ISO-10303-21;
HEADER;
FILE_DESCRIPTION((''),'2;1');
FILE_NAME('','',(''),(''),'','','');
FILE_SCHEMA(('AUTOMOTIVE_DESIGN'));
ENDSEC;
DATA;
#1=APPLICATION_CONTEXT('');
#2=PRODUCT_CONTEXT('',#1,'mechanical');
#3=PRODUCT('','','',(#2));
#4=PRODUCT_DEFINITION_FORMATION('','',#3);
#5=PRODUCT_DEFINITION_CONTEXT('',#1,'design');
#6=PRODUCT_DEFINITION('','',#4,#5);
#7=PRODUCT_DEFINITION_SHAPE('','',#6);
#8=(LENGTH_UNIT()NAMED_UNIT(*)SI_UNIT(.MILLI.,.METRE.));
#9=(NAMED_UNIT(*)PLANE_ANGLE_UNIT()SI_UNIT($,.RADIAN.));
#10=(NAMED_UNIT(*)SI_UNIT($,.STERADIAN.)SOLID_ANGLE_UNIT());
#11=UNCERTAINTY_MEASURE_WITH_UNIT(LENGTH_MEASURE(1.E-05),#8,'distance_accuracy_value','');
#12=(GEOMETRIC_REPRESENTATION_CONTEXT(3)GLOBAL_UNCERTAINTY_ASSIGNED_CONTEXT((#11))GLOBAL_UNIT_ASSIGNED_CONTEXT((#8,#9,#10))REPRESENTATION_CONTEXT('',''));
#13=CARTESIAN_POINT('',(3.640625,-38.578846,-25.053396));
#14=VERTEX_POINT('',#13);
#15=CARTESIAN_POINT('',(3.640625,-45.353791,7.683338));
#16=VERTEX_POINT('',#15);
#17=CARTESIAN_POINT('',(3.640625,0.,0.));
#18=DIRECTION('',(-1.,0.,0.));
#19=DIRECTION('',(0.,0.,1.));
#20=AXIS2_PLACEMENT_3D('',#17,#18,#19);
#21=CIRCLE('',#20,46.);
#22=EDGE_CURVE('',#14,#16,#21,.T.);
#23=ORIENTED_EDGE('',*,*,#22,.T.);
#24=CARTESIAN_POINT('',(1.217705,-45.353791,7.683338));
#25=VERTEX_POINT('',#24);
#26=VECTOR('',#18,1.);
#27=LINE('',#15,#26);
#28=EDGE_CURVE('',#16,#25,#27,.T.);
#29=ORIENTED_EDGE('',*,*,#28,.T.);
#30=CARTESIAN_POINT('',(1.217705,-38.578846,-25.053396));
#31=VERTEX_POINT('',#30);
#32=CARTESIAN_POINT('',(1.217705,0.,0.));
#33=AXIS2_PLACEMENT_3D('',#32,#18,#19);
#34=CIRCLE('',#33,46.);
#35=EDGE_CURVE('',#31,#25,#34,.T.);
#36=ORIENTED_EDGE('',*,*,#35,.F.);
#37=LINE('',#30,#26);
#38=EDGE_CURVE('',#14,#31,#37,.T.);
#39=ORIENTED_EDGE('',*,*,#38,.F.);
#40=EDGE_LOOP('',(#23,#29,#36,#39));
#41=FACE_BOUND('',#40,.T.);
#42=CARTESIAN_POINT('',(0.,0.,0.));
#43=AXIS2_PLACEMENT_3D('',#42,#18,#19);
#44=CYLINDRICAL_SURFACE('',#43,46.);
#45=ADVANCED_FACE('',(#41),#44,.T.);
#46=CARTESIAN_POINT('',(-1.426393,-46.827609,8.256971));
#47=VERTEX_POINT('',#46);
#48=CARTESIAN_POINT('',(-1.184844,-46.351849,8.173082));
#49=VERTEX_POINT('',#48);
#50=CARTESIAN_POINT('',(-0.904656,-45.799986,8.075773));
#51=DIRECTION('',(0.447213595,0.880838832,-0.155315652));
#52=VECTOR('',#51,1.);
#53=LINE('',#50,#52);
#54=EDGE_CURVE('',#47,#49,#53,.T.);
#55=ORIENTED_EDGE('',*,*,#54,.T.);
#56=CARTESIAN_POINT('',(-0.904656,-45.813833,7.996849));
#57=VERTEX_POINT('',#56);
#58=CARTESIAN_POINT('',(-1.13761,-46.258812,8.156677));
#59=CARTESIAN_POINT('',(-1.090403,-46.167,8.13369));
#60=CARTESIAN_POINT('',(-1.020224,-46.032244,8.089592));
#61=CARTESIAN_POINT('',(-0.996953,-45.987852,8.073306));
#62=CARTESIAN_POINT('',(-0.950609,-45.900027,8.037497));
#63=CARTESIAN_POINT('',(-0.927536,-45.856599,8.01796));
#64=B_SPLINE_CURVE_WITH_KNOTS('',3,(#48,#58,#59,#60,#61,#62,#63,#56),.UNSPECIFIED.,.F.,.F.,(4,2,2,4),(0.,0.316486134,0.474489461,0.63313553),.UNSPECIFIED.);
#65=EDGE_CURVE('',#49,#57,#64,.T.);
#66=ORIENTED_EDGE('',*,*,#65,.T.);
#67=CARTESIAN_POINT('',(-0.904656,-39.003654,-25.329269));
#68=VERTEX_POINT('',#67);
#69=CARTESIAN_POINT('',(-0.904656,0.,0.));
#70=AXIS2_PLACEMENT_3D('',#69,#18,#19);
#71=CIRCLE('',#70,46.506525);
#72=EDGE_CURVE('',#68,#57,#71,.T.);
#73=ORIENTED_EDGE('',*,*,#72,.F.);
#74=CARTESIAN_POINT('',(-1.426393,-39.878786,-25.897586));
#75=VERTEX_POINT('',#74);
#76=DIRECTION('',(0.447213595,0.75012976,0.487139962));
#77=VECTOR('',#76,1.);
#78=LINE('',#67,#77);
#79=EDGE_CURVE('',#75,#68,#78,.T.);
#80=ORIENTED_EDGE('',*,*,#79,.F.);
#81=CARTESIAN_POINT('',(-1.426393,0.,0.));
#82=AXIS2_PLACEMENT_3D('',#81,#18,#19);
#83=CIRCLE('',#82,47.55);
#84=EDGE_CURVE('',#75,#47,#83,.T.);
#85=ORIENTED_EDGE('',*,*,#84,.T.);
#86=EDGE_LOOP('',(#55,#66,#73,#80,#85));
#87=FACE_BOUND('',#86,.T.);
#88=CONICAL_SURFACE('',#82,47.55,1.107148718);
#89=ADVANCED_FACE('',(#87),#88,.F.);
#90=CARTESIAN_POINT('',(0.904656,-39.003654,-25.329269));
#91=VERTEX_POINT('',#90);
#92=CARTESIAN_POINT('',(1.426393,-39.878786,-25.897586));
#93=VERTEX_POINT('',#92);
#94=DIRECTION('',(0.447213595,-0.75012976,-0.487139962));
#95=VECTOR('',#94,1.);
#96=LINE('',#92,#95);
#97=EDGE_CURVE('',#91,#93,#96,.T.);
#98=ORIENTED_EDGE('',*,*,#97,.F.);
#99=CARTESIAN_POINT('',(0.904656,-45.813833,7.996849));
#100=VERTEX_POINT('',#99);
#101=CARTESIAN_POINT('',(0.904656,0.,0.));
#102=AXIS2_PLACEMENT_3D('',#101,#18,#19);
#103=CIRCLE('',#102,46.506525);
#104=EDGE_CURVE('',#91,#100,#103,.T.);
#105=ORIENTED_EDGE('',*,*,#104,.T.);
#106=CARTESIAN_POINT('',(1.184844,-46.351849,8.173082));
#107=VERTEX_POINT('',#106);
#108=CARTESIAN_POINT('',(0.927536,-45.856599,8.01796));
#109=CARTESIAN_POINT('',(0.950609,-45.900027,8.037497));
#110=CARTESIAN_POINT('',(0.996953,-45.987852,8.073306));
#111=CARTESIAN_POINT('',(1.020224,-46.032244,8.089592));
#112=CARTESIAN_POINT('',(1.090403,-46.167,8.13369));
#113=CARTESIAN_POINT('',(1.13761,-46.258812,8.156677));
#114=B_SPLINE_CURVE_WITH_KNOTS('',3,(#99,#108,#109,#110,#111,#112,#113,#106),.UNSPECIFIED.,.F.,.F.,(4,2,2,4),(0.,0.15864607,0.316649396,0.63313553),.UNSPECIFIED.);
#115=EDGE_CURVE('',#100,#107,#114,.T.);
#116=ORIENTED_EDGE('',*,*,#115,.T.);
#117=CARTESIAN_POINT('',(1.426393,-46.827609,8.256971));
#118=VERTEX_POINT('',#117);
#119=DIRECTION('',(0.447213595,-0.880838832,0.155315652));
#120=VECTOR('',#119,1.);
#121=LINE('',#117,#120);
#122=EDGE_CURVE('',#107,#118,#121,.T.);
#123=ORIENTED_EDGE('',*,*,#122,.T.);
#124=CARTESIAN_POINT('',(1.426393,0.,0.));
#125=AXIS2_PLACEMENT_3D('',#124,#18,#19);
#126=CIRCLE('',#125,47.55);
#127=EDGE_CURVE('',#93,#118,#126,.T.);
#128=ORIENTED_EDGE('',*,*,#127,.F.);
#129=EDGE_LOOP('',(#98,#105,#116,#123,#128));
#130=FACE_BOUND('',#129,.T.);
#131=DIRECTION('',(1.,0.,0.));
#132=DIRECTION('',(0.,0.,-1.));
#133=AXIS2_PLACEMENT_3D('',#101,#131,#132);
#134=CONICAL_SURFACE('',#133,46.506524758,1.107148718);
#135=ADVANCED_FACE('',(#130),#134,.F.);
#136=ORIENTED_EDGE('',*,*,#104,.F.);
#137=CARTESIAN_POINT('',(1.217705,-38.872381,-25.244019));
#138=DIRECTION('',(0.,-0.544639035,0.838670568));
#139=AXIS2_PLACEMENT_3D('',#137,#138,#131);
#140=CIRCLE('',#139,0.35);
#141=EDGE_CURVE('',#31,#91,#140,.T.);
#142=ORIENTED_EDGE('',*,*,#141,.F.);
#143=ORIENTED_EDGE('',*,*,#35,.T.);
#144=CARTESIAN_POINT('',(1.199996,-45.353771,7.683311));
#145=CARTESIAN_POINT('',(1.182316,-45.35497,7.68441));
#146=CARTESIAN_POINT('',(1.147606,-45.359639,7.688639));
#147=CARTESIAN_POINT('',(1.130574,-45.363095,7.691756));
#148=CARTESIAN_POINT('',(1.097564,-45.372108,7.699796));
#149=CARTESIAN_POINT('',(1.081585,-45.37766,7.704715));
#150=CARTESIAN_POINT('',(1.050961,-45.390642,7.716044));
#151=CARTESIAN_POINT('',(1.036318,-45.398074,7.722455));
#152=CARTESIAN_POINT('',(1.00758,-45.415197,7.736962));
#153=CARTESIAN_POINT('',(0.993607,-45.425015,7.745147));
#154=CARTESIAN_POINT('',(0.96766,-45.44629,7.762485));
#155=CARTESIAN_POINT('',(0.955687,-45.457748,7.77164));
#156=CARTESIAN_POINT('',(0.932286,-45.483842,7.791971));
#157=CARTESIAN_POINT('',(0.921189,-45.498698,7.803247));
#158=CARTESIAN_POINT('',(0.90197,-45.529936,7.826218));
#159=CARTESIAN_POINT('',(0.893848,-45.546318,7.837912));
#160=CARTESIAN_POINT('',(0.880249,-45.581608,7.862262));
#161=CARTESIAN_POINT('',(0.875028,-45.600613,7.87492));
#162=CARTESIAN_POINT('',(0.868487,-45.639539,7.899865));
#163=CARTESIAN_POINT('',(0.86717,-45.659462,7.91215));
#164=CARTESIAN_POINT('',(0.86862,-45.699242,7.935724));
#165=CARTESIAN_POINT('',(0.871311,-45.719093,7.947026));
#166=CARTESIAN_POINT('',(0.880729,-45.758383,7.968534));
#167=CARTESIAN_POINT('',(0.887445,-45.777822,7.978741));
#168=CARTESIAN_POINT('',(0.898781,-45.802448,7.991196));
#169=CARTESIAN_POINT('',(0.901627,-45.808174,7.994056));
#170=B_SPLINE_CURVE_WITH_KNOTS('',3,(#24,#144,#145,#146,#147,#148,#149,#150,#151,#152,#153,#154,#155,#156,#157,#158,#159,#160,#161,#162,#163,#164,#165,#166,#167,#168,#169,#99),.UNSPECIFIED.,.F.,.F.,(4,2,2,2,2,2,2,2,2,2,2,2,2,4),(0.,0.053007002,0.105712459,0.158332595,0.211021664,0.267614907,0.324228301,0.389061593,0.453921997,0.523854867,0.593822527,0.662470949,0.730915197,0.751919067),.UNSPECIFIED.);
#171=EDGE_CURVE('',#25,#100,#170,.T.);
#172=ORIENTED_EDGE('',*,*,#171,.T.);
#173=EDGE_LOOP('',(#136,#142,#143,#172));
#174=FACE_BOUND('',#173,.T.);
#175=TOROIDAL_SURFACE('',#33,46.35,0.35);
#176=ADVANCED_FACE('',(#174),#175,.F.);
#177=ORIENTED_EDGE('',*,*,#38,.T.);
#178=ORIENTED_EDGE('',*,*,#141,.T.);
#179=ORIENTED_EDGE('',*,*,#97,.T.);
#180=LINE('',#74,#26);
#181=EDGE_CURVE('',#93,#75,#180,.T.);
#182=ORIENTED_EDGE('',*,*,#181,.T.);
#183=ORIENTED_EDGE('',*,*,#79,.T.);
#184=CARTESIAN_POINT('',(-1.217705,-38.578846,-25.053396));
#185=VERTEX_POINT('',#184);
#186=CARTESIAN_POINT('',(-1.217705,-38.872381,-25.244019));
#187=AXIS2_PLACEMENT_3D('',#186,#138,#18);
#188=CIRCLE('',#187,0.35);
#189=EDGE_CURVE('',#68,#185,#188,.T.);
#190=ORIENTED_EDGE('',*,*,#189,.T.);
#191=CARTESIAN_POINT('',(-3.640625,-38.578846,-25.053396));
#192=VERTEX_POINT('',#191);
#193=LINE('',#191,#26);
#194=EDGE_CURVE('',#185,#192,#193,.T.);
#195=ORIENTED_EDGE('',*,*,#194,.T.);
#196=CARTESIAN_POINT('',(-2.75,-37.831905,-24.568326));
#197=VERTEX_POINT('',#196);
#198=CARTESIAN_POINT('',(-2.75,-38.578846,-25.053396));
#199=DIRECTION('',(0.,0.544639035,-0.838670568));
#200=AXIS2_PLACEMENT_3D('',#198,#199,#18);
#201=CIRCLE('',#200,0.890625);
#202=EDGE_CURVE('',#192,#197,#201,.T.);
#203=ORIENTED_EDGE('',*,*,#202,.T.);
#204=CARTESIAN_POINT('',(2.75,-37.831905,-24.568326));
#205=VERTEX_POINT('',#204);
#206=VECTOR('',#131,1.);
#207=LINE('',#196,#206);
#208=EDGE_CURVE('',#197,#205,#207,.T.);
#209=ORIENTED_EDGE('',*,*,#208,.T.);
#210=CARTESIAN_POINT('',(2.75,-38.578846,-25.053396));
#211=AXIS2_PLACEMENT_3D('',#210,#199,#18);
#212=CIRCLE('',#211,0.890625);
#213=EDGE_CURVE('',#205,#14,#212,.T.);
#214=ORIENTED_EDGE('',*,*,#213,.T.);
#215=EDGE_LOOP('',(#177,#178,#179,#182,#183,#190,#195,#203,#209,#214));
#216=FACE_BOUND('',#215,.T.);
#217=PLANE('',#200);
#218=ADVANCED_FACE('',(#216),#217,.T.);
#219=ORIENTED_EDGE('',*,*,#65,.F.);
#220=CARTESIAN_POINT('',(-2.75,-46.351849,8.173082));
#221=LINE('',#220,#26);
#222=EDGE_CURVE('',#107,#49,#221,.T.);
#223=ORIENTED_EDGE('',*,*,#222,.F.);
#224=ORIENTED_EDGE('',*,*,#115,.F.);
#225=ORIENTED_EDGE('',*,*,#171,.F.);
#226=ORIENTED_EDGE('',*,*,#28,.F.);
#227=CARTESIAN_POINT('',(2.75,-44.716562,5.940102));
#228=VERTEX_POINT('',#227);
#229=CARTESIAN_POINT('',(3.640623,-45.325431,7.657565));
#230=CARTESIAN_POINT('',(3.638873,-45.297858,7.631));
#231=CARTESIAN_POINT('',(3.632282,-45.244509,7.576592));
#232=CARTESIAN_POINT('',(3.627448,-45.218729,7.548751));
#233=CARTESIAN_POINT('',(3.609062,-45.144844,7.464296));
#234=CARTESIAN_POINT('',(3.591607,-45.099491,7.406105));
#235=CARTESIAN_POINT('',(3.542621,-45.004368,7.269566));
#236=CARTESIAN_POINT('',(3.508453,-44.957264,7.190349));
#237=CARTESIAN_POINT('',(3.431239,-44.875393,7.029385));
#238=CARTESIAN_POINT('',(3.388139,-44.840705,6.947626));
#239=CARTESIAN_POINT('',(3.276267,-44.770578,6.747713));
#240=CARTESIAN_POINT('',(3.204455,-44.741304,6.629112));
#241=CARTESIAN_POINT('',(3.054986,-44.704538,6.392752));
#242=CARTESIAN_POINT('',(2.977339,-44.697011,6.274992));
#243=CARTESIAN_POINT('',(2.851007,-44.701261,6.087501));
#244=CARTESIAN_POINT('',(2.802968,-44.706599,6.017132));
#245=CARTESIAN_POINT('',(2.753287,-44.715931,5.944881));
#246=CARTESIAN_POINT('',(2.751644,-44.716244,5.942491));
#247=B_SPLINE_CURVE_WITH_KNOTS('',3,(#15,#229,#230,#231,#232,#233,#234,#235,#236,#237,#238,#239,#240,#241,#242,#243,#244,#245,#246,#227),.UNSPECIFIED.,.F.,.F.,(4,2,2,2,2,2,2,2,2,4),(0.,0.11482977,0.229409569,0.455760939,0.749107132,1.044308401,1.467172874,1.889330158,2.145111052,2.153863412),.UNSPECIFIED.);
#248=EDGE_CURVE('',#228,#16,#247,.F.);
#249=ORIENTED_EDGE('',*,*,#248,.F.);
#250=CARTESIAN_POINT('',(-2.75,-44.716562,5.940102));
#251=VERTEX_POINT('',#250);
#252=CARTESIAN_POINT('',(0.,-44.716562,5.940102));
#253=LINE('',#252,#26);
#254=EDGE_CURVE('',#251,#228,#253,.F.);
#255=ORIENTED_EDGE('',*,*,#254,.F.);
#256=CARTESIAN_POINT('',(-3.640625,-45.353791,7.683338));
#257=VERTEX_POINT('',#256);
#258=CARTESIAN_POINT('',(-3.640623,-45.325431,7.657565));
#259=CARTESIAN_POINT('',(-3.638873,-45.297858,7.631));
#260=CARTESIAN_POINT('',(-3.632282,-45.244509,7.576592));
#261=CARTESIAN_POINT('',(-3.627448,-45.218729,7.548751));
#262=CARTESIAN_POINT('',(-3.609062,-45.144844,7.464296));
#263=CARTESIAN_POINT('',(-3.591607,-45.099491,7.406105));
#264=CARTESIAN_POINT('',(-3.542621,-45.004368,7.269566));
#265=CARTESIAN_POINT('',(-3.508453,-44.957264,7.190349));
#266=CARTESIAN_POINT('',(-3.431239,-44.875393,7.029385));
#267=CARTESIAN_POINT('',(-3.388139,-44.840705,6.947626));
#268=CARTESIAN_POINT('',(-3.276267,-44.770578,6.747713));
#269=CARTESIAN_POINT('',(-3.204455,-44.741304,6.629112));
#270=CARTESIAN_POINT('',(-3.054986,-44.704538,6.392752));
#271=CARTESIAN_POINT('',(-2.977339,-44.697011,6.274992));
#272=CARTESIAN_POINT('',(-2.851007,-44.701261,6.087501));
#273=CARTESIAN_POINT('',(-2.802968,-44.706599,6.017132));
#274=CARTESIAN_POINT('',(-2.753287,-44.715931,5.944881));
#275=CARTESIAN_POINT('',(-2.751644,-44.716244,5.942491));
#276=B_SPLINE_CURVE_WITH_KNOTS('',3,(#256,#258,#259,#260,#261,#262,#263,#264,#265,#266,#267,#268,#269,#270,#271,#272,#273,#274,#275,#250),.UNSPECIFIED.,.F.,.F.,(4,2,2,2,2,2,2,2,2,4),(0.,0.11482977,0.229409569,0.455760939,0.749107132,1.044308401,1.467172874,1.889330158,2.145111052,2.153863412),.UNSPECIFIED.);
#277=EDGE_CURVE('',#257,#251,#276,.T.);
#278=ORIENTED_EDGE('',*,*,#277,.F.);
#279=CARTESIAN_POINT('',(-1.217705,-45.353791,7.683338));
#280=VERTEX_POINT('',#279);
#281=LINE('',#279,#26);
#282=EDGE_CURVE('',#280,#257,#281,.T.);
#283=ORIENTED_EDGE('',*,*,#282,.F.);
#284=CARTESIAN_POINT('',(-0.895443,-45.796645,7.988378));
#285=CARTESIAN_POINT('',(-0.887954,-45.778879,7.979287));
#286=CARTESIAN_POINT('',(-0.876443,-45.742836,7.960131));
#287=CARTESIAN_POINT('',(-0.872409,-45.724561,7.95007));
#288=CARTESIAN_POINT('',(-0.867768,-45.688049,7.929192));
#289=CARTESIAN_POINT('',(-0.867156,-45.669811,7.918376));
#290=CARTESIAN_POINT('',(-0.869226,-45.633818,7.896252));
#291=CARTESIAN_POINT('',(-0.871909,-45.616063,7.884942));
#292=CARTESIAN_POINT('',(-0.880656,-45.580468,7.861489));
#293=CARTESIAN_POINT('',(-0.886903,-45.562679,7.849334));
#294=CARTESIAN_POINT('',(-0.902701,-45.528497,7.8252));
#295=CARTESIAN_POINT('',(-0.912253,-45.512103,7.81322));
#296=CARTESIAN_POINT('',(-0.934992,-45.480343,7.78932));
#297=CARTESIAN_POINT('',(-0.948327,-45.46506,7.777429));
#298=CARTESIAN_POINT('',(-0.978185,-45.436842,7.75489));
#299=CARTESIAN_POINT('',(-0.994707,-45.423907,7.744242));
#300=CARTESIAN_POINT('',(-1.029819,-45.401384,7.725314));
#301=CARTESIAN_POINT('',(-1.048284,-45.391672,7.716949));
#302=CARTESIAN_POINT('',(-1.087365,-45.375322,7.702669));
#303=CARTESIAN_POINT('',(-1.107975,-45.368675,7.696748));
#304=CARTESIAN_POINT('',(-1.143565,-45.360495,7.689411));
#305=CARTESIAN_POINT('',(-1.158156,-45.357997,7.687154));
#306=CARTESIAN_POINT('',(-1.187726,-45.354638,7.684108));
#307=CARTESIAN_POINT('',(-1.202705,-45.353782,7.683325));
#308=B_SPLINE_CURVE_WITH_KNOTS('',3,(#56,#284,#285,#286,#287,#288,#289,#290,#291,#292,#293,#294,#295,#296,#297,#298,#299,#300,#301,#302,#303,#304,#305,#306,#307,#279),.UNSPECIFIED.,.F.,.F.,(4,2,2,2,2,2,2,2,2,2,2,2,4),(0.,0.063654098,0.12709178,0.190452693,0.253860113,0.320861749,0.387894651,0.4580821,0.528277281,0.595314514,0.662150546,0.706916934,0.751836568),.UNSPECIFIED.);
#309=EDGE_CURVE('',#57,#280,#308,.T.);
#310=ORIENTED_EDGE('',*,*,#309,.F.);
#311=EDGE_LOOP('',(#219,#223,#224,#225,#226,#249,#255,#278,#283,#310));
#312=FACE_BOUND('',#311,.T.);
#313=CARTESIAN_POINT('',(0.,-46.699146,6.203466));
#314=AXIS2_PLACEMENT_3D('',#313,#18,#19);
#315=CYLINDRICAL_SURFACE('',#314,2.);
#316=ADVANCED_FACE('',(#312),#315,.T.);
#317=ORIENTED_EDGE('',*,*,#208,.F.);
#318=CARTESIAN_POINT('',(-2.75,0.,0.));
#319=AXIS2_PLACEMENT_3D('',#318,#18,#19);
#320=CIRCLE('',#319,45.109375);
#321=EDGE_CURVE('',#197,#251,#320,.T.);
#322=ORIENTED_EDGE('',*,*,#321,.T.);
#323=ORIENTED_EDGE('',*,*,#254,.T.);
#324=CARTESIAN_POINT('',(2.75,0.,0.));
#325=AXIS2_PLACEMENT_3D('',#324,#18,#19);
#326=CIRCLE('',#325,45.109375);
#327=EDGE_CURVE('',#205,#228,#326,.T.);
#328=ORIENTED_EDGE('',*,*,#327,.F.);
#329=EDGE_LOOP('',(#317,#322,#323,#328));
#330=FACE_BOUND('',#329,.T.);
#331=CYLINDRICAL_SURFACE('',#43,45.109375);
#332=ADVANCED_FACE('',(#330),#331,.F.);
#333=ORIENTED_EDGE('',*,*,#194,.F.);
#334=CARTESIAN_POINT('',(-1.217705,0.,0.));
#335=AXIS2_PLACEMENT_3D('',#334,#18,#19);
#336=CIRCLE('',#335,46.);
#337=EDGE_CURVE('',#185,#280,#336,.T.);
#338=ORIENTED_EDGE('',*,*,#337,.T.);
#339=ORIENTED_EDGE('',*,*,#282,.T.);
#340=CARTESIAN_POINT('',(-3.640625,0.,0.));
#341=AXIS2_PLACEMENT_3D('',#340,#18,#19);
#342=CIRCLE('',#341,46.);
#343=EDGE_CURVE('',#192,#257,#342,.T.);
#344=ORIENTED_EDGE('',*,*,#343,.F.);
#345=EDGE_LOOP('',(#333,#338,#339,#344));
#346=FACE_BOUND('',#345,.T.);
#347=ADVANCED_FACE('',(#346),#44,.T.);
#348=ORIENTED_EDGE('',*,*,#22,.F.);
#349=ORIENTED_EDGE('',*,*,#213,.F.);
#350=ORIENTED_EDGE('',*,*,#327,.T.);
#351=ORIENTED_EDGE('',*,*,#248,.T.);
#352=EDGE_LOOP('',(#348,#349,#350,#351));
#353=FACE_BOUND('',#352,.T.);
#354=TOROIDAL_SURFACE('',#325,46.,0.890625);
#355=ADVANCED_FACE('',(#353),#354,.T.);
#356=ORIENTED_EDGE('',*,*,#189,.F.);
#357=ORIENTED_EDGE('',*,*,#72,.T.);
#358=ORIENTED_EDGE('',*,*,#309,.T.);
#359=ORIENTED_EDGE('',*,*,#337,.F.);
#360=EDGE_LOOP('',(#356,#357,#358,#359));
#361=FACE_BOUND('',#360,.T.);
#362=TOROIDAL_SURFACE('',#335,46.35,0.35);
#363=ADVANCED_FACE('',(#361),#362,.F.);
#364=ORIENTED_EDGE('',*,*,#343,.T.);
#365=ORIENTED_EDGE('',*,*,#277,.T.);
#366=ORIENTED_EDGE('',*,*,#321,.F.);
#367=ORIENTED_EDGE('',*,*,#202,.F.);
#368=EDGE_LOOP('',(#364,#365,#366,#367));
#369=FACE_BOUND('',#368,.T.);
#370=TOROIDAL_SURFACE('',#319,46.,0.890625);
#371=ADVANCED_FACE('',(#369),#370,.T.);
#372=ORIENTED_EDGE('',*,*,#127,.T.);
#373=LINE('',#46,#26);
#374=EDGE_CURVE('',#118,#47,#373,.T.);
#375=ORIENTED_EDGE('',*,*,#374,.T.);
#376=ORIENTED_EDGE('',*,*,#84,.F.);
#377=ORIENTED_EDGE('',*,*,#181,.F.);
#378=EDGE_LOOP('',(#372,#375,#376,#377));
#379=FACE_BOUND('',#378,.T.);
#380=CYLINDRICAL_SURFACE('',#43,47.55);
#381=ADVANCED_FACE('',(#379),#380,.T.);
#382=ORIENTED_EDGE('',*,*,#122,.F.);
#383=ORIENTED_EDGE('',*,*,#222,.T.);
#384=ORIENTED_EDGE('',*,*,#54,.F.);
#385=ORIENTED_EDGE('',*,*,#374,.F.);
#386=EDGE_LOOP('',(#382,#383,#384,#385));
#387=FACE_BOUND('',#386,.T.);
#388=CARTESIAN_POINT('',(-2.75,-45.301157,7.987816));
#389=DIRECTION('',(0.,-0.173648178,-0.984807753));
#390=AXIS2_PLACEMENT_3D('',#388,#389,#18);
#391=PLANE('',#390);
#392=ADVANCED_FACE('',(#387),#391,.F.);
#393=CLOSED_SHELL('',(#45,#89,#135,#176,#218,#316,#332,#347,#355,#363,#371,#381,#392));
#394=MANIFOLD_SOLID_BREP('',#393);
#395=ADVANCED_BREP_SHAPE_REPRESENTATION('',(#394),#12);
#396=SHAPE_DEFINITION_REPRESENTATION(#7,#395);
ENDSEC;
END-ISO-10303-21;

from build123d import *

# Parameters (mm, degrees)
REVOLVE1_ANGLE           = 33
REVOLVE1_OTHER_WAY_ANGLE = 10
FILLET1_START            = -5
FILLET1_DEPTH            = 10


with BuildPart() as part:
    # Sketch1 → Revolve1 (revolve)
    with BuildSketch(Plane(origin=(0, 0, 0), x_dir=(1, 0, 0), z_dir=(0, 0, -1))):
        with BuildLine():
            Line((-3.640625, 46), (-1.217705098, 46))
            ThreePointArc((-1.217705098, 46), (-0.919977315, 46.165994111), (-0.904655581, 46.506524758))
            Line((-0.904655581, 46.506524758), (-1.426393202, 47.55))
            Line((-1.426393202, 47.55), (1.426393202, 47.55))
            Line((1.426393202, 47.55), (0.904655581, 46.506524758))
            ThreePointArc((0.904655581, 46.506524758), (0.919977315, 46.165994111), (1.217705098, 46))
            Line((1.217705098, 46), (3.640625, 46))
            ThreePointArc((3.640625, 46), (3.379766977, 45.370233023), (2.75, 45.109375))
            Line((2.75, 45.109375), (-2.75, 45.109375))
            ThreePointArc((-2.75, 45.109375), (-3.379766977, 45.370233023), (-3.640625, 46))
        make_face()
    revolve(axis=Axis((0, 0, 0), (1, 0, 0)), revolution_arc=REVOLVE1_ANGLE)

    # Sketch1 → Revolve1 other way (revolve)
    with BuildSketch(Plane(origin=(0, 0, 0), x_dir=(1, 0, 0), z_dir=(0, 0, -1))):
        with BuildLine():
            Line((-3.640625, 46), (-1.217705098, 46))
            ThreePointArc((-1.217705098, 46), (-0.919977315, 46.165994111), (-0.904655581, 46.506524758))
            Line((-0.904655581, 46.506524758), (-1.426393202, 47.55))
            Line((-1.426393202, 47.55), (1.426393202, 47.55))
            Line((1.426393202, 47.55), (0.904655581, 46.506524758))
            ThreePointArc((0.904655581, 46.506524758), (0.919977315, 46.165994111), (1.217705098, 46))
            Line((1.217705098, 46), (3.640625, 46))
            ThreePointArc((3.640625, 46), (3.379766977, 45.370233023), (2.75, 45.109375))
            Line((2.75, 45.109375), (-2.75, 45.109375))
            ThreePointArc((-2.75, 45.109375), (-3.379766977, 45.370233023), (-3.640625, 46))
        make_face()
    revolve(axis=Axis((0, 0, 0), (-1, 0, 0)), revolution_arc=REVOLVE1_OTHER_WAY_ANGLE)

    # Fillet1: read off the stored shape, not the designer's step
    # Fillet1 outline → Fillet1 (cut)
    with BuildSketch(Plane.YZ.offset(FILLET1_START)):
        with BuildLine():
            ThreePointArc((-46.351849466, 8.173081667), (-45.085567377, 7.385144883), (-44.716561853, 5.94010176))
            ThreePointArc((-44.716561853, 5.94010176), (-44.580361526, 6.888184024), (-44.424062234, 7.833160764))
            Line((-44.424062234, 7.833160764), (-46.351849466, 8.173081667))
        make_face()
    extrude(amount=FILLET1_DEPTH, mode=Mode.SUBTRACT)


solid = part.part
